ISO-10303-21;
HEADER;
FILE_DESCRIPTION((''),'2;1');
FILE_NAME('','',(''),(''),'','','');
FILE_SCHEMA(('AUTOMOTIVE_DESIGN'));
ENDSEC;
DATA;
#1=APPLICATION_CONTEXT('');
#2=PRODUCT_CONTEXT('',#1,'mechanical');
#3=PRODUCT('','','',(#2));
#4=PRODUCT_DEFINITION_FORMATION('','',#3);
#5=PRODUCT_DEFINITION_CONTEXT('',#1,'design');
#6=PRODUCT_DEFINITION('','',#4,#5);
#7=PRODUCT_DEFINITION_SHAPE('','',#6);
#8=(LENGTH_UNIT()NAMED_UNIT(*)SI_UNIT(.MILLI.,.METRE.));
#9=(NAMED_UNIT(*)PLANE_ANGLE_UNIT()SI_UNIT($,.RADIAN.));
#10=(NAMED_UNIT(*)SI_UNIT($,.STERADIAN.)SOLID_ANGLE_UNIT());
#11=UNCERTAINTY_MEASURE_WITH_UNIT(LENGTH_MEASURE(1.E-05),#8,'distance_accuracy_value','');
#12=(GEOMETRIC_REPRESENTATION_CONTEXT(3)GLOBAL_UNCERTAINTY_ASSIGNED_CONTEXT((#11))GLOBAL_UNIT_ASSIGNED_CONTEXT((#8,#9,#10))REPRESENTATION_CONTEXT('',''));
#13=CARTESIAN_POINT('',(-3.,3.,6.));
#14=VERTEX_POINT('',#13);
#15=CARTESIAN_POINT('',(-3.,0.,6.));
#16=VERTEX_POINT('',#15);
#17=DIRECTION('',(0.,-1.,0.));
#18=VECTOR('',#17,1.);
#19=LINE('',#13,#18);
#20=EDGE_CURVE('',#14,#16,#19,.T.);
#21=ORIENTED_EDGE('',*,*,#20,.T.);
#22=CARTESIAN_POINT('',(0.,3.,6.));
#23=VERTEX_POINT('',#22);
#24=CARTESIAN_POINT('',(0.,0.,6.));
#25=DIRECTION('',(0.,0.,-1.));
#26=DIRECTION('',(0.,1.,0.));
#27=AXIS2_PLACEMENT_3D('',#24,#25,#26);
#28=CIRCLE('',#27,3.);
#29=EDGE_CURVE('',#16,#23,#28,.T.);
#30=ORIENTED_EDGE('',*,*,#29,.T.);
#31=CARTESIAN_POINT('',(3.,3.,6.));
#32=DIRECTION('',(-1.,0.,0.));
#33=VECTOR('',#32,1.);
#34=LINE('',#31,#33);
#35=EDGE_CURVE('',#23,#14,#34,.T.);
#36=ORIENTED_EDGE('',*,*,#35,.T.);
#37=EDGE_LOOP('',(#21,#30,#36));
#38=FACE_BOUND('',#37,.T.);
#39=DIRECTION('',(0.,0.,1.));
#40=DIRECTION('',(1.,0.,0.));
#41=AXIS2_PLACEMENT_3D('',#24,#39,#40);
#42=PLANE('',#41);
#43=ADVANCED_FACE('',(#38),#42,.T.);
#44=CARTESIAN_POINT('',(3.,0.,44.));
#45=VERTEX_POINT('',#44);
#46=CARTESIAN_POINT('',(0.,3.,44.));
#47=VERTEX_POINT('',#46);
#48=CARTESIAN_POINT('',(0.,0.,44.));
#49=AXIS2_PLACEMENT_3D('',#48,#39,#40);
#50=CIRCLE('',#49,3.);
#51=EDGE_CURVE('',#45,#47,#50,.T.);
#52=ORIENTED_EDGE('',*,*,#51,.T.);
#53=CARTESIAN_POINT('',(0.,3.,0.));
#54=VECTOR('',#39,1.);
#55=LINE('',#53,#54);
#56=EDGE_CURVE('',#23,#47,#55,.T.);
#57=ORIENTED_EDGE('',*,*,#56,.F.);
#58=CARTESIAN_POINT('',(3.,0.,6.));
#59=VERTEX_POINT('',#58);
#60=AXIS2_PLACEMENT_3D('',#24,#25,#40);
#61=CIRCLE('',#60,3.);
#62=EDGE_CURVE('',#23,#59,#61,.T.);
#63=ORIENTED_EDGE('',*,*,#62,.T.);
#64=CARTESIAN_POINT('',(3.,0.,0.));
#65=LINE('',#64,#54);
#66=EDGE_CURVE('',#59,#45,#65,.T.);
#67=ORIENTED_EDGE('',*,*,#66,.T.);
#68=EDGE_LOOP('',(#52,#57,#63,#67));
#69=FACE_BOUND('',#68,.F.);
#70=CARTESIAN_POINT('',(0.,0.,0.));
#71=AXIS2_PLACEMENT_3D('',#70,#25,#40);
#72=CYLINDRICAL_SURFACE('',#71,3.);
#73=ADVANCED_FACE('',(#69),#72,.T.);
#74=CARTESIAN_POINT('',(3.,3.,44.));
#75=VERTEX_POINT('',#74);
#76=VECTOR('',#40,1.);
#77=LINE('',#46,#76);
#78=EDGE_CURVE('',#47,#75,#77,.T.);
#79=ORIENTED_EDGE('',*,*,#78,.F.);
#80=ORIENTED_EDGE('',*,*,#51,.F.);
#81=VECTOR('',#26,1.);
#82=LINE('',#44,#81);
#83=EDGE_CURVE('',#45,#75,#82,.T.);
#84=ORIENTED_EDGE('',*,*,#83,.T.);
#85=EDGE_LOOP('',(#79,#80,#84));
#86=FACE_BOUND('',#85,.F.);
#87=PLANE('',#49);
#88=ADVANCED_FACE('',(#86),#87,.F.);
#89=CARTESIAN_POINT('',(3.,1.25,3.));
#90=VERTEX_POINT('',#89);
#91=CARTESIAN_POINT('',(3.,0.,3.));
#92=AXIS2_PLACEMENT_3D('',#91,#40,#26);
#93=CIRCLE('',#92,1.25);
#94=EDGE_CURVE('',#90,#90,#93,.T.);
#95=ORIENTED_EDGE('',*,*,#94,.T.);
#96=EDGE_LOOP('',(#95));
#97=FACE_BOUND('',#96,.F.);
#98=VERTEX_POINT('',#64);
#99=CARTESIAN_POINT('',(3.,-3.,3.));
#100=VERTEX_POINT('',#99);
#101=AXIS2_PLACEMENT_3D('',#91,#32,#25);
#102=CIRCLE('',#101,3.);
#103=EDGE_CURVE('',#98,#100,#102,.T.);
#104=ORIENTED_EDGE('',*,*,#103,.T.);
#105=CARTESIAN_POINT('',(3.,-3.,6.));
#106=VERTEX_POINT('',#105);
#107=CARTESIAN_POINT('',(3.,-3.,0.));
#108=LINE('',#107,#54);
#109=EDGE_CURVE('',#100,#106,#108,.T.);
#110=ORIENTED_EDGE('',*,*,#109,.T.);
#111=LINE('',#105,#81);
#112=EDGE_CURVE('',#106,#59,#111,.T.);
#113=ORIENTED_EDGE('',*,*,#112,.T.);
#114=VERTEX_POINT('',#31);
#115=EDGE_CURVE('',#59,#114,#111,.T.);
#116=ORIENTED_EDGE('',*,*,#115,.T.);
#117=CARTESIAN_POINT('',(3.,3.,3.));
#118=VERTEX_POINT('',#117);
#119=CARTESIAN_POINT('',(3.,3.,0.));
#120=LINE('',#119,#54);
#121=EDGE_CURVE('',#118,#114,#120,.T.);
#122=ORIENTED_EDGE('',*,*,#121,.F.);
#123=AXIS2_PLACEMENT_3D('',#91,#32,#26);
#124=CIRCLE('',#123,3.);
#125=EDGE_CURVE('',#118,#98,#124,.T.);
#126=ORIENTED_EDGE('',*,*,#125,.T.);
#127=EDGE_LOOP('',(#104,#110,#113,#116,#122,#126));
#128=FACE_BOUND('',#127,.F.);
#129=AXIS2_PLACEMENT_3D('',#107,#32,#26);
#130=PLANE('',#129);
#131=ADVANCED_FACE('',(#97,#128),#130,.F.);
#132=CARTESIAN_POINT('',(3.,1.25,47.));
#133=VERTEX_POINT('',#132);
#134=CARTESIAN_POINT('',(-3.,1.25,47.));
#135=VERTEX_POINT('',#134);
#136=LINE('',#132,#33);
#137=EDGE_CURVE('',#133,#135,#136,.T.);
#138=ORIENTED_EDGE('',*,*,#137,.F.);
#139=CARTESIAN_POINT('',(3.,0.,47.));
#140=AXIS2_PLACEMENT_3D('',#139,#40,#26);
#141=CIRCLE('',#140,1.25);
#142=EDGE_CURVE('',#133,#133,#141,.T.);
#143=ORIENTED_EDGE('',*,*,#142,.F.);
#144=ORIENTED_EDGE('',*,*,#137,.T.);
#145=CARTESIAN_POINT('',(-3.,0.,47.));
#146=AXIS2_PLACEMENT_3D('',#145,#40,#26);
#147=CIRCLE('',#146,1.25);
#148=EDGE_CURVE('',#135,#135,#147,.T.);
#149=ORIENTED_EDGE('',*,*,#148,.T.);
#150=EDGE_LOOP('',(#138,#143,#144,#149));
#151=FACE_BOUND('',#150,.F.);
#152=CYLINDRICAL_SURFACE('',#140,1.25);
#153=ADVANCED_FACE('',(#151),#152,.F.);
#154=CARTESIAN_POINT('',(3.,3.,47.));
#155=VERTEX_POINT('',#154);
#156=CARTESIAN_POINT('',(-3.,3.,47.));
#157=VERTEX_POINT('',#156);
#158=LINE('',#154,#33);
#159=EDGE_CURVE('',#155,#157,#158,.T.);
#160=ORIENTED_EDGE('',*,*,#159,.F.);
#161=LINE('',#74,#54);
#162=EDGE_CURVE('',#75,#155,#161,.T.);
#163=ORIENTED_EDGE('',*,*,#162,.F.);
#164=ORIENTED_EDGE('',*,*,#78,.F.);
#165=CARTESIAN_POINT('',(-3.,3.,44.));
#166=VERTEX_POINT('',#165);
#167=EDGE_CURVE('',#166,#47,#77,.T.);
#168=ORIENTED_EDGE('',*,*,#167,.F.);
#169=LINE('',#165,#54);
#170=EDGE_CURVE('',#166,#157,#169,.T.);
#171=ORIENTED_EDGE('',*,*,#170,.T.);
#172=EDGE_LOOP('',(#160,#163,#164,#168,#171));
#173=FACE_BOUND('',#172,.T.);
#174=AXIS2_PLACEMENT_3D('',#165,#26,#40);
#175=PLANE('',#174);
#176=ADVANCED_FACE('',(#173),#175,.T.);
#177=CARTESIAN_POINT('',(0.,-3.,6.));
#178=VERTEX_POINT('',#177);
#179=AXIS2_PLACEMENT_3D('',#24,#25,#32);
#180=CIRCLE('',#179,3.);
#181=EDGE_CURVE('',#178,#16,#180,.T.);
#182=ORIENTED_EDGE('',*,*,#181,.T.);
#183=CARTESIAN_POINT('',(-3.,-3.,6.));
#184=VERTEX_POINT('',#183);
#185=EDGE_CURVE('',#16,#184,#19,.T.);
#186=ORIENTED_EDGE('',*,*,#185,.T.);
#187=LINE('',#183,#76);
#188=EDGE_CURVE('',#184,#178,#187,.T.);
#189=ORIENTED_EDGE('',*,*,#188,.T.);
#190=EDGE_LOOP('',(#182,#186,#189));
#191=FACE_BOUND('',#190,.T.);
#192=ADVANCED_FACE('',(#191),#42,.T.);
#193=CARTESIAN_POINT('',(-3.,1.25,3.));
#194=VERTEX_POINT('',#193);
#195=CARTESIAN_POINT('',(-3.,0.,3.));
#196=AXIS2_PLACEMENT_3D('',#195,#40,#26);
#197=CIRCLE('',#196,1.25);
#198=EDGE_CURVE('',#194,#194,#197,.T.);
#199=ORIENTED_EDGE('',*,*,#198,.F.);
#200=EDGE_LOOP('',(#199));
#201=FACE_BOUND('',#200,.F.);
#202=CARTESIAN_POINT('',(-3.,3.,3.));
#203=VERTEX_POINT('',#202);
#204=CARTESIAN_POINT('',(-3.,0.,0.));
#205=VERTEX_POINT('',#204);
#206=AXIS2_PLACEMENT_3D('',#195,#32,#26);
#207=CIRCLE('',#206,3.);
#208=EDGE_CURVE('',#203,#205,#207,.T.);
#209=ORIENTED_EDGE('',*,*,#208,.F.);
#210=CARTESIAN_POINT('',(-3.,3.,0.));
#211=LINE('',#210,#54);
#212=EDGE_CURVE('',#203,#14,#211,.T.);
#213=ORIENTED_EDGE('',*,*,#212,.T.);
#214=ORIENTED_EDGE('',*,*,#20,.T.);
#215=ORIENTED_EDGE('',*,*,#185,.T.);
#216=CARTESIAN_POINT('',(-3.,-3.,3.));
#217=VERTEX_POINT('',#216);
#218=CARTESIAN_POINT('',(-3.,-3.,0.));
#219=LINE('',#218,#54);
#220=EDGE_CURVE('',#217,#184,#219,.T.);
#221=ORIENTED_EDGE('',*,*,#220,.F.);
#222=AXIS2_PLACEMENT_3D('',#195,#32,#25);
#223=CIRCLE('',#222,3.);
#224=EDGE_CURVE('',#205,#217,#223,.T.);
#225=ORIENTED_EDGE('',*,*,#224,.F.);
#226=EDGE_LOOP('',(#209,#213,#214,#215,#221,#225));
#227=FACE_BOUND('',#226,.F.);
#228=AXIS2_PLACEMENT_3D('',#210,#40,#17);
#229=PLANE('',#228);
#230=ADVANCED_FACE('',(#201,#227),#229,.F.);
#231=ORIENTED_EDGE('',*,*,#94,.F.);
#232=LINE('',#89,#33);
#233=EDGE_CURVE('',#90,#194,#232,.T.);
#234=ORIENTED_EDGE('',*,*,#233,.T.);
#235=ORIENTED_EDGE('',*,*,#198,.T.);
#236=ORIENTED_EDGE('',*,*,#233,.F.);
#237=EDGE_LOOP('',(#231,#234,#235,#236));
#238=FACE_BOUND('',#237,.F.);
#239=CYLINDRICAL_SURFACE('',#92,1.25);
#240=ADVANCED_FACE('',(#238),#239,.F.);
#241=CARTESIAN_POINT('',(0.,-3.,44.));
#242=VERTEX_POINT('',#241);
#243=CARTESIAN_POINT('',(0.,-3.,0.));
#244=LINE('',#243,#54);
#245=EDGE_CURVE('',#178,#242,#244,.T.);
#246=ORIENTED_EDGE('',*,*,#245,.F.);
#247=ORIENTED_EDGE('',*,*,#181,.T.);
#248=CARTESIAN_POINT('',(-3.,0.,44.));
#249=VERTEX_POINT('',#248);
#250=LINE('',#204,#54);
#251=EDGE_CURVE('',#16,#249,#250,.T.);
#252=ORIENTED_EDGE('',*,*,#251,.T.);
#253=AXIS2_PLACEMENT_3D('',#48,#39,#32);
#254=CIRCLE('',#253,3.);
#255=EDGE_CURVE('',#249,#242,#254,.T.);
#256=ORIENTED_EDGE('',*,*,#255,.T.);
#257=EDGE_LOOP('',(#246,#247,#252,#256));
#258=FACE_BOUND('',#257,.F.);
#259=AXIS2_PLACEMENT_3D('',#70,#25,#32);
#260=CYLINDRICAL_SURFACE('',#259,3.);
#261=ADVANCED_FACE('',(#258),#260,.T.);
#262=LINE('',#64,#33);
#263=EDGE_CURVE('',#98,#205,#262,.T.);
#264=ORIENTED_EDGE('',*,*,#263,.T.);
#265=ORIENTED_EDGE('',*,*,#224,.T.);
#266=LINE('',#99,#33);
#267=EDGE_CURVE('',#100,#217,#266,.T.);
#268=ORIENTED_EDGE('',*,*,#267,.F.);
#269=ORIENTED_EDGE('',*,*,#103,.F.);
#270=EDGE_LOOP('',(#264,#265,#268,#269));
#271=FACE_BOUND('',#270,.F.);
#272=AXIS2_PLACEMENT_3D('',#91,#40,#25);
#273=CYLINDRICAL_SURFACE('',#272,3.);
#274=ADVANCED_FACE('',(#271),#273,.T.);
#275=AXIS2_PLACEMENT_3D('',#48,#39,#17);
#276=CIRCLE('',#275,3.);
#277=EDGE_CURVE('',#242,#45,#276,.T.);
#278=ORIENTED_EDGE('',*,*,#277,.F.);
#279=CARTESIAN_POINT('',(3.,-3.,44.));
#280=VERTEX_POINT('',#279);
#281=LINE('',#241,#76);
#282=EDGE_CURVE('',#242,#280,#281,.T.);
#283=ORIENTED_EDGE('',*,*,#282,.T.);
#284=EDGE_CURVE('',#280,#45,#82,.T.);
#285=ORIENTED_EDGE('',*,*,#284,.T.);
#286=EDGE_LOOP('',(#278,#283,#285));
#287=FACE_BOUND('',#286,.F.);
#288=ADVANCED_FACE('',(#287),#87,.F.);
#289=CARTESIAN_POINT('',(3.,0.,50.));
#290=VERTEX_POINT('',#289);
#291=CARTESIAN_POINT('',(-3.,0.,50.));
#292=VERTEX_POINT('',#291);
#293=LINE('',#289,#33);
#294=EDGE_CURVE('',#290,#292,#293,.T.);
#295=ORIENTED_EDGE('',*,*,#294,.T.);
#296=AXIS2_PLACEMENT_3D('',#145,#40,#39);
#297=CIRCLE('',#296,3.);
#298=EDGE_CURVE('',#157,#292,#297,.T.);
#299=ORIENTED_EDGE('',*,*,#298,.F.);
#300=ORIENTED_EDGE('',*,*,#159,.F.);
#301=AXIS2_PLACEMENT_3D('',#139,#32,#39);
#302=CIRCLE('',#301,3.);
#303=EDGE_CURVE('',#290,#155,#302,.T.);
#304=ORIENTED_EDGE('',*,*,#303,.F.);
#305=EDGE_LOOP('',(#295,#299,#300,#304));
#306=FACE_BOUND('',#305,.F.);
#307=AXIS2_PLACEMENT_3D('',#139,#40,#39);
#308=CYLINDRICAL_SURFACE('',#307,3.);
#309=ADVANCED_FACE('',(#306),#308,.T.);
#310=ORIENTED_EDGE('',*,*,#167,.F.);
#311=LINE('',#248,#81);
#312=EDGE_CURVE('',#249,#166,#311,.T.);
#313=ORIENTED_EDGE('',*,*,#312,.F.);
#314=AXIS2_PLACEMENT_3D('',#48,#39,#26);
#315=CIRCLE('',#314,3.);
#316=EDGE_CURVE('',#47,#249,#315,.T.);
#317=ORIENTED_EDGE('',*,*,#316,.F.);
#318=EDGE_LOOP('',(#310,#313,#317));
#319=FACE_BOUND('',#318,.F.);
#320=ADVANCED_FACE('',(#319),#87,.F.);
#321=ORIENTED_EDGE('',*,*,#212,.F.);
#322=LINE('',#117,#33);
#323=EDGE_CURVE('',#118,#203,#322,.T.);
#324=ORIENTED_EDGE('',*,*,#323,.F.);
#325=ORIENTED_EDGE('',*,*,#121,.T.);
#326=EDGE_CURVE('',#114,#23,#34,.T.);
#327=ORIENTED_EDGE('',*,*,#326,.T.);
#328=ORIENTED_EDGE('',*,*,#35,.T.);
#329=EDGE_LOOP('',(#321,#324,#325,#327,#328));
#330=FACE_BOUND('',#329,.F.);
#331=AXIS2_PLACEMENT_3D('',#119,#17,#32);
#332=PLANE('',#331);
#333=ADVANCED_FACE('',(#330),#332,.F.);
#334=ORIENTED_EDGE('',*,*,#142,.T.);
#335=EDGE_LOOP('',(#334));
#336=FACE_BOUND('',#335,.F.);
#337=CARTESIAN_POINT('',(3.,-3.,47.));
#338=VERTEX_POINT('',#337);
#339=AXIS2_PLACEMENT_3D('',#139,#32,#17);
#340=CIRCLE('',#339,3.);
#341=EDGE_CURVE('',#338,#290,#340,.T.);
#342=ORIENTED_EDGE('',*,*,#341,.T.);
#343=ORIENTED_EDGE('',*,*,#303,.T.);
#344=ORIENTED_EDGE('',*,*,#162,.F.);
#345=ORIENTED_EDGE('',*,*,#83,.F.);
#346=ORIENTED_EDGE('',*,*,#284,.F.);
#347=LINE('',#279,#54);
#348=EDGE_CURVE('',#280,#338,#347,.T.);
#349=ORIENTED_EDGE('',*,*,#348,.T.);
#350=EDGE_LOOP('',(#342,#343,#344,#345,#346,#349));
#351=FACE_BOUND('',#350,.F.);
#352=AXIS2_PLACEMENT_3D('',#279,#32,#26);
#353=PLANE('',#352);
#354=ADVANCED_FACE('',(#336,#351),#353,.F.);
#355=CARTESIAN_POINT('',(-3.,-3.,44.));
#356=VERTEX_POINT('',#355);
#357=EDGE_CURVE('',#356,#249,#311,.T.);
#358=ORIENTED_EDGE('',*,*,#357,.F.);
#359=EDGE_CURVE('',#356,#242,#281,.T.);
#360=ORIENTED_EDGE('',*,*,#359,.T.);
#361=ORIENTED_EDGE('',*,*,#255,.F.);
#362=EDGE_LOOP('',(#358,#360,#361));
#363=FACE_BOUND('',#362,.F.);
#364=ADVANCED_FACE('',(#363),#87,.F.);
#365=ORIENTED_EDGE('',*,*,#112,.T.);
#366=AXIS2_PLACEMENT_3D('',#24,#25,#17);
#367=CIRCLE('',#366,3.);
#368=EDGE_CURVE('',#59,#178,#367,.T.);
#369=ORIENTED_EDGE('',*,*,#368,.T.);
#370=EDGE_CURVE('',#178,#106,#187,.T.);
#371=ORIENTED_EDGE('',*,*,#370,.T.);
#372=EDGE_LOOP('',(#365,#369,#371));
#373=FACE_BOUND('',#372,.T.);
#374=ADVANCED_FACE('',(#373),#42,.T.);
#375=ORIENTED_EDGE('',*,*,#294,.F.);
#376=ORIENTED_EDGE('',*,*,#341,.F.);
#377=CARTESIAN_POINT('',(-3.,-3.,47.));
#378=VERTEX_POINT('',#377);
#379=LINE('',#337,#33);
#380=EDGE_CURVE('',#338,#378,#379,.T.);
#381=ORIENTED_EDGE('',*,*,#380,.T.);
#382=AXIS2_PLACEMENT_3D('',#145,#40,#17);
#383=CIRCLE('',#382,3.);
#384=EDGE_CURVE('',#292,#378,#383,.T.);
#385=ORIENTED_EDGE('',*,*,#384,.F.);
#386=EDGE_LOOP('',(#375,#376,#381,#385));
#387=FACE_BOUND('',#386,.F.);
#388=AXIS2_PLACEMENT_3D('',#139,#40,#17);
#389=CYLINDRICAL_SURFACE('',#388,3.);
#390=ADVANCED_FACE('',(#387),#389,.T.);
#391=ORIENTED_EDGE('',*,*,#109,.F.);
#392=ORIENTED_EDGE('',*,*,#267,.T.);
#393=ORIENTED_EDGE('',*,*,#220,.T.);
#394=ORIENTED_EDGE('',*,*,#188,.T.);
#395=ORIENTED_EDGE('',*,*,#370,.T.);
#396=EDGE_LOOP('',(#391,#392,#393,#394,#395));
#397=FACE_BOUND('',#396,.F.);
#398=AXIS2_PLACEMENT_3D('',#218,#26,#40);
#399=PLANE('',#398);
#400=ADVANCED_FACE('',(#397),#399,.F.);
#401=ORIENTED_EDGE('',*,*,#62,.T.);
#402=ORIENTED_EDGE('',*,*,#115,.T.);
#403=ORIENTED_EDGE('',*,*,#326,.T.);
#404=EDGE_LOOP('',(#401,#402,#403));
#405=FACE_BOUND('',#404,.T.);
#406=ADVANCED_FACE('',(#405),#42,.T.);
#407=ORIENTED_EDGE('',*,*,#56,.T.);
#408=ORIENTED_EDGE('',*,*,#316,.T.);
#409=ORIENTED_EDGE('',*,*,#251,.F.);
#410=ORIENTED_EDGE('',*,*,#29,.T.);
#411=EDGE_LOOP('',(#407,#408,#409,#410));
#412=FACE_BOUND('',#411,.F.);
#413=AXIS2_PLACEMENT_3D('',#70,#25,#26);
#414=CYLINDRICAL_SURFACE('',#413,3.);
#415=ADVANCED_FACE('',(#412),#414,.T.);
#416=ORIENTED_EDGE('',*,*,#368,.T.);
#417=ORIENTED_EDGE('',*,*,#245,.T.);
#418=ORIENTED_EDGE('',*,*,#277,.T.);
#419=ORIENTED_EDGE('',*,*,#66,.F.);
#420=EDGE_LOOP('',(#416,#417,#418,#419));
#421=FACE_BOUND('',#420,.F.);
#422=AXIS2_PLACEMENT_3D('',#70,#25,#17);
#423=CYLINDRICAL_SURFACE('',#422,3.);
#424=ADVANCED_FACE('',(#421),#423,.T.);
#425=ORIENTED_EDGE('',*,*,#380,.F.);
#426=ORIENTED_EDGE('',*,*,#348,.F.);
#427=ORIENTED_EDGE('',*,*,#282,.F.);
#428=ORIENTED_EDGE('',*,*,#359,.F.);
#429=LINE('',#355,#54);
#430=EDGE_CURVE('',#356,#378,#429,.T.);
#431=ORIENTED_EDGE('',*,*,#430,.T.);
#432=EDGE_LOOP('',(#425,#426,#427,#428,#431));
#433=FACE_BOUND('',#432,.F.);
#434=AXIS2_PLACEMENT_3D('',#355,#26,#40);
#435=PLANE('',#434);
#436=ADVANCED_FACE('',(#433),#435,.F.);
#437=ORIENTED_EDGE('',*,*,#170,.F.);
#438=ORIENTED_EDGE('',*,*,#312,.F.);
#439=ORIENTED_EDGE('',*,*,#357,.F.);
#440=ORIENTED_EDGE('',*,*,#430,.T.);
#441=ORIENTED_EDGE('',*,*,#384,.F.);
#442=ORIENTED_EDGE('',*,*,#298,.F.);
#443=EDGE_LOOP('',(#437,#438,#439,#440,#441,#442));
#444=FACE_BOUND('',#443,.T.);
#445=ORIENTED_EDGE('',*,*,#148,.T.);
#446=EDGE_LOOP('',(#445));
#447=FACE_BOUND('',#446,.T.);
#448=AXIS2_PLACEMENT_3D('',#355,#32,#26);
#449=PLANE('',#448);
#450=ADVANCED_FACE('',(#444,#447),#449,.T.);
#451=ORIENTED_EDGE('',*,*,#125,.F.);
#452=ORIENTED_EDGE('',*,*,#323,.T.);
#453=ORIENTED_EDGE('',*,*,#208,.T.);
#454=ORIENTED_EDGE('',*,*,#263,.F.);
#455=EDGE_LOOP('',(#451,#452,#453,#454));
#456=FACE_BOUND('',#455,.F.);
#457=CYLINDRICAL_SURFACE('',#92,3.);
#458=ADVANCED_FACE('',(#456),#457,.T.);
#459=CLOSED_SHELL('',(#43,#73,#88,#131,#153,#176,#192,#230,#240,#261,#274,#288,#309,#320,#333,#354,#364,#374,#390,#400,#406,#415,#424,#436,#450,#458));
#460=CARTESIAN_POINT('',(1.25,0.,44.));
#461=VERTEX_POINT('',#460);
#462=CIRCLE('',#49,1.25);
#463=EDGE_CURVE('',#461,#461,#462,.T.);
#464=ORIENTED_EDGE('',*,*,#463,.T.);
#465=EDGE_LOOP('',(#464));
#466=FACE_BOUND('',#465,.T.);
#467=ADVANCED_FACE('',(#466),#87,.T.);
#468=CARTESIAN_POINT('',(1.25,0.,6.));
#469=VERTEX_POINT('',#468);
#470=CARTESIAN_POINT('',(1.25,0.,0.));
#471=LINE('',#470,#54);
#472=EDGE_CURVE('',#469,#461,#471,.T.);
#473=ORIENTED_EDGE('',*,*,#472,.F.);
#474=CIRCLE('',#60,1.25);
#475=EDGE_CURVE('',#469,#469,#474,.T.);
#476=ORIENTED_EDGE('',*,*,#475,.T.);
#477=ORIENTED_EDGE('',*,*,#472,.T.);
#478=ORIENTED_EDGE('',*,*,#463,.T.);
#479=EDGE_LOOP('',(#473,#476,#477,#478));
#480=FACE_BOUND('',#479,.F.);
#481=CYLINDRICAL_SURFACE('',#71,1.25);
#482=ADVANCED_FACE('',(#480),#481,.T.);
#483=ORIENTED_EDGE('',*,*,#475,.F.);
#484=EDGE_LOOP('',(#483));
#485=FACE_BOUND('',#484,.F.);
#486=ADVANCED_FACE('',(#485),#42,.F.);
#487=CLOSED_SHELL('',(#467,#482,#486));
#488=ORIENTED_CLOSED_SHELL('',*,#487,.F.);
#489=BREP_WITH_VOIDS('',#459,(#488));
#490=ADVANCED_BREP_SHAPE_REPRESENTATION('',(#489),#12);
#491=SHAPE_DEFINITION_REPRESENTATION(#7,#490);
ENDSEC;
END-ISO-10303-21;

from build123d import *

# Parameters (mm, degrees)
F0_R     = 1.25
F1_DEPTH = 6
F2_DEPTH = 44
F3_R     = 1.25
F4_DEPTH = 6
F5_W     = 6
F5_H     = 6
F6_DEPTH = 6
F7_R     = 1.25
F8_DEPTH = 25


# Not quite as in the source:
# - a feature names something its author has since deleted; it is built from what else it names


with BuildPart() as f1:
    # F0 (on Top) → F1 (new body)
    with BuildSketch(Plane.XY):
        with BuildLine():
            ThreePointArc((0, -3), (2.1213203436, -2.1213203436), (3, 0))
            ThreePointArc((3, 0), (2.1213203436, 2.1213203436), (0, 3))
            ThreePointArc((0, 3), (-2.1213203436, 2.1213203436), (-3, 0))
            ThreePointArc((-3, 0), (-2.1213203436, -2.1213203436), (0, -3))
        make_face()
        Circle(F0_R, mode=Mode.SUBTRACT)
        with BuildLine():
            ThreePointArc((-3, 0), (-2.1213203436, 2.1213203436), (0, 3))
            Line((0, 3), (-3, 3))
            Line((-3, 3), (-3, 0))
        make_face()
        with BuildLine():
            Line((-3, -3), (0, -3))
            ThreePointArc((0, -3), (-2.1213203436, -2.1213203436), (-3, 0))
            Line((-3, 0), (-3, -3))
        make_face()
        with BuildLine():
            Line((3, -3), (3, 0))
            ThreePointArc((3, 0), (2.1213203436, -2.1213203436), (0, -3))
            Line((0, -3), (3, -3))
        make_face()
        with BuildLine():
            ThreePointArc((0, 3), (2.1213203436, 2.1213203436), (3, 0))
            Line((3, 0), (3, 3))
            Line((3, 3), (0, 3))
        make_face()
        Circle(F0_R)
    extrude(amount=F1_DEPTH)

    # F0 (on Top) → F2 (join)
    with BuildSketch(Plane.XY):
        with BuildLine():
            ThreePointArc((0, -3), (2.1213203436, -2.1213203436), (3, 0))
            ThreePointArc((3, 0), (2.1213203436, 2.1213203436), (0, 3))
            ThreePointArc((0, 3), (-2.1213203436, 2.1213203436), (-3, 0))
            ThreePointArc((-3, 0), (-2.1213203436, -2.1213203436), (0, -3))
        make_face()
        Circle(F0_R, mode=Mode.SUBTRACT)
    extrude(amount=F2_DEPTH)

    # F3 (on face) → F4 (cut)
    with BuildSketch(Plane.YZ.offset(3)):
        with Locations((0, 3)):
            Circle(F3_R)
        with BuildLine():
            Line((-3, 0), (0, 0))
            ThreePointArc((0, 0), (-2.1213203436, 0.8786796564), (-3, 3))
            Line((-3, 3), (-3, 0))
        make_face()
        with BuildLine():
            Line((3, 0), (3, 3))
            ThreePointArc((3, 3), (2.1213203436, 0.8786796564), (0, 0))
            Line((0, 0), (3, 0))
        make_face()
    extrude(amount=-F4_DEPTH, mode=Mode.SUBTRACT)

    # F5 (on face) → F6 (join)
    with BuildSketch(Plane.XY.offset(44)):
        Rectangle(F5_W, F5_H)
    extrude(amount=F6_DEPTH)

    # F7 (on face) → F8 (cut)
    with BuildSketch(Plane.YZ.offset(3)):
        with Locations((0, 47)):
            Circle(F7_R)
        with BuildLine():
            Line((-3, 50), (-3, 47))
            ThreePointArc((-3, 47), (-2.1213203436, 49.1213203436), (0, 50))
            Line((0, 50), (-3, 50))
        make_face()
        with BuildLine():
            ThreePointArc((0, 50), (2.1213203436, 49.1213203436), (3, 47))
            Line((3, 47), (3, 50))
            Line((3, 50), (0, 50))
        make_face()
    extrude(amount=-F8_DEPTH, mode=Mode.SUBTRACT)


solid = f1.part
